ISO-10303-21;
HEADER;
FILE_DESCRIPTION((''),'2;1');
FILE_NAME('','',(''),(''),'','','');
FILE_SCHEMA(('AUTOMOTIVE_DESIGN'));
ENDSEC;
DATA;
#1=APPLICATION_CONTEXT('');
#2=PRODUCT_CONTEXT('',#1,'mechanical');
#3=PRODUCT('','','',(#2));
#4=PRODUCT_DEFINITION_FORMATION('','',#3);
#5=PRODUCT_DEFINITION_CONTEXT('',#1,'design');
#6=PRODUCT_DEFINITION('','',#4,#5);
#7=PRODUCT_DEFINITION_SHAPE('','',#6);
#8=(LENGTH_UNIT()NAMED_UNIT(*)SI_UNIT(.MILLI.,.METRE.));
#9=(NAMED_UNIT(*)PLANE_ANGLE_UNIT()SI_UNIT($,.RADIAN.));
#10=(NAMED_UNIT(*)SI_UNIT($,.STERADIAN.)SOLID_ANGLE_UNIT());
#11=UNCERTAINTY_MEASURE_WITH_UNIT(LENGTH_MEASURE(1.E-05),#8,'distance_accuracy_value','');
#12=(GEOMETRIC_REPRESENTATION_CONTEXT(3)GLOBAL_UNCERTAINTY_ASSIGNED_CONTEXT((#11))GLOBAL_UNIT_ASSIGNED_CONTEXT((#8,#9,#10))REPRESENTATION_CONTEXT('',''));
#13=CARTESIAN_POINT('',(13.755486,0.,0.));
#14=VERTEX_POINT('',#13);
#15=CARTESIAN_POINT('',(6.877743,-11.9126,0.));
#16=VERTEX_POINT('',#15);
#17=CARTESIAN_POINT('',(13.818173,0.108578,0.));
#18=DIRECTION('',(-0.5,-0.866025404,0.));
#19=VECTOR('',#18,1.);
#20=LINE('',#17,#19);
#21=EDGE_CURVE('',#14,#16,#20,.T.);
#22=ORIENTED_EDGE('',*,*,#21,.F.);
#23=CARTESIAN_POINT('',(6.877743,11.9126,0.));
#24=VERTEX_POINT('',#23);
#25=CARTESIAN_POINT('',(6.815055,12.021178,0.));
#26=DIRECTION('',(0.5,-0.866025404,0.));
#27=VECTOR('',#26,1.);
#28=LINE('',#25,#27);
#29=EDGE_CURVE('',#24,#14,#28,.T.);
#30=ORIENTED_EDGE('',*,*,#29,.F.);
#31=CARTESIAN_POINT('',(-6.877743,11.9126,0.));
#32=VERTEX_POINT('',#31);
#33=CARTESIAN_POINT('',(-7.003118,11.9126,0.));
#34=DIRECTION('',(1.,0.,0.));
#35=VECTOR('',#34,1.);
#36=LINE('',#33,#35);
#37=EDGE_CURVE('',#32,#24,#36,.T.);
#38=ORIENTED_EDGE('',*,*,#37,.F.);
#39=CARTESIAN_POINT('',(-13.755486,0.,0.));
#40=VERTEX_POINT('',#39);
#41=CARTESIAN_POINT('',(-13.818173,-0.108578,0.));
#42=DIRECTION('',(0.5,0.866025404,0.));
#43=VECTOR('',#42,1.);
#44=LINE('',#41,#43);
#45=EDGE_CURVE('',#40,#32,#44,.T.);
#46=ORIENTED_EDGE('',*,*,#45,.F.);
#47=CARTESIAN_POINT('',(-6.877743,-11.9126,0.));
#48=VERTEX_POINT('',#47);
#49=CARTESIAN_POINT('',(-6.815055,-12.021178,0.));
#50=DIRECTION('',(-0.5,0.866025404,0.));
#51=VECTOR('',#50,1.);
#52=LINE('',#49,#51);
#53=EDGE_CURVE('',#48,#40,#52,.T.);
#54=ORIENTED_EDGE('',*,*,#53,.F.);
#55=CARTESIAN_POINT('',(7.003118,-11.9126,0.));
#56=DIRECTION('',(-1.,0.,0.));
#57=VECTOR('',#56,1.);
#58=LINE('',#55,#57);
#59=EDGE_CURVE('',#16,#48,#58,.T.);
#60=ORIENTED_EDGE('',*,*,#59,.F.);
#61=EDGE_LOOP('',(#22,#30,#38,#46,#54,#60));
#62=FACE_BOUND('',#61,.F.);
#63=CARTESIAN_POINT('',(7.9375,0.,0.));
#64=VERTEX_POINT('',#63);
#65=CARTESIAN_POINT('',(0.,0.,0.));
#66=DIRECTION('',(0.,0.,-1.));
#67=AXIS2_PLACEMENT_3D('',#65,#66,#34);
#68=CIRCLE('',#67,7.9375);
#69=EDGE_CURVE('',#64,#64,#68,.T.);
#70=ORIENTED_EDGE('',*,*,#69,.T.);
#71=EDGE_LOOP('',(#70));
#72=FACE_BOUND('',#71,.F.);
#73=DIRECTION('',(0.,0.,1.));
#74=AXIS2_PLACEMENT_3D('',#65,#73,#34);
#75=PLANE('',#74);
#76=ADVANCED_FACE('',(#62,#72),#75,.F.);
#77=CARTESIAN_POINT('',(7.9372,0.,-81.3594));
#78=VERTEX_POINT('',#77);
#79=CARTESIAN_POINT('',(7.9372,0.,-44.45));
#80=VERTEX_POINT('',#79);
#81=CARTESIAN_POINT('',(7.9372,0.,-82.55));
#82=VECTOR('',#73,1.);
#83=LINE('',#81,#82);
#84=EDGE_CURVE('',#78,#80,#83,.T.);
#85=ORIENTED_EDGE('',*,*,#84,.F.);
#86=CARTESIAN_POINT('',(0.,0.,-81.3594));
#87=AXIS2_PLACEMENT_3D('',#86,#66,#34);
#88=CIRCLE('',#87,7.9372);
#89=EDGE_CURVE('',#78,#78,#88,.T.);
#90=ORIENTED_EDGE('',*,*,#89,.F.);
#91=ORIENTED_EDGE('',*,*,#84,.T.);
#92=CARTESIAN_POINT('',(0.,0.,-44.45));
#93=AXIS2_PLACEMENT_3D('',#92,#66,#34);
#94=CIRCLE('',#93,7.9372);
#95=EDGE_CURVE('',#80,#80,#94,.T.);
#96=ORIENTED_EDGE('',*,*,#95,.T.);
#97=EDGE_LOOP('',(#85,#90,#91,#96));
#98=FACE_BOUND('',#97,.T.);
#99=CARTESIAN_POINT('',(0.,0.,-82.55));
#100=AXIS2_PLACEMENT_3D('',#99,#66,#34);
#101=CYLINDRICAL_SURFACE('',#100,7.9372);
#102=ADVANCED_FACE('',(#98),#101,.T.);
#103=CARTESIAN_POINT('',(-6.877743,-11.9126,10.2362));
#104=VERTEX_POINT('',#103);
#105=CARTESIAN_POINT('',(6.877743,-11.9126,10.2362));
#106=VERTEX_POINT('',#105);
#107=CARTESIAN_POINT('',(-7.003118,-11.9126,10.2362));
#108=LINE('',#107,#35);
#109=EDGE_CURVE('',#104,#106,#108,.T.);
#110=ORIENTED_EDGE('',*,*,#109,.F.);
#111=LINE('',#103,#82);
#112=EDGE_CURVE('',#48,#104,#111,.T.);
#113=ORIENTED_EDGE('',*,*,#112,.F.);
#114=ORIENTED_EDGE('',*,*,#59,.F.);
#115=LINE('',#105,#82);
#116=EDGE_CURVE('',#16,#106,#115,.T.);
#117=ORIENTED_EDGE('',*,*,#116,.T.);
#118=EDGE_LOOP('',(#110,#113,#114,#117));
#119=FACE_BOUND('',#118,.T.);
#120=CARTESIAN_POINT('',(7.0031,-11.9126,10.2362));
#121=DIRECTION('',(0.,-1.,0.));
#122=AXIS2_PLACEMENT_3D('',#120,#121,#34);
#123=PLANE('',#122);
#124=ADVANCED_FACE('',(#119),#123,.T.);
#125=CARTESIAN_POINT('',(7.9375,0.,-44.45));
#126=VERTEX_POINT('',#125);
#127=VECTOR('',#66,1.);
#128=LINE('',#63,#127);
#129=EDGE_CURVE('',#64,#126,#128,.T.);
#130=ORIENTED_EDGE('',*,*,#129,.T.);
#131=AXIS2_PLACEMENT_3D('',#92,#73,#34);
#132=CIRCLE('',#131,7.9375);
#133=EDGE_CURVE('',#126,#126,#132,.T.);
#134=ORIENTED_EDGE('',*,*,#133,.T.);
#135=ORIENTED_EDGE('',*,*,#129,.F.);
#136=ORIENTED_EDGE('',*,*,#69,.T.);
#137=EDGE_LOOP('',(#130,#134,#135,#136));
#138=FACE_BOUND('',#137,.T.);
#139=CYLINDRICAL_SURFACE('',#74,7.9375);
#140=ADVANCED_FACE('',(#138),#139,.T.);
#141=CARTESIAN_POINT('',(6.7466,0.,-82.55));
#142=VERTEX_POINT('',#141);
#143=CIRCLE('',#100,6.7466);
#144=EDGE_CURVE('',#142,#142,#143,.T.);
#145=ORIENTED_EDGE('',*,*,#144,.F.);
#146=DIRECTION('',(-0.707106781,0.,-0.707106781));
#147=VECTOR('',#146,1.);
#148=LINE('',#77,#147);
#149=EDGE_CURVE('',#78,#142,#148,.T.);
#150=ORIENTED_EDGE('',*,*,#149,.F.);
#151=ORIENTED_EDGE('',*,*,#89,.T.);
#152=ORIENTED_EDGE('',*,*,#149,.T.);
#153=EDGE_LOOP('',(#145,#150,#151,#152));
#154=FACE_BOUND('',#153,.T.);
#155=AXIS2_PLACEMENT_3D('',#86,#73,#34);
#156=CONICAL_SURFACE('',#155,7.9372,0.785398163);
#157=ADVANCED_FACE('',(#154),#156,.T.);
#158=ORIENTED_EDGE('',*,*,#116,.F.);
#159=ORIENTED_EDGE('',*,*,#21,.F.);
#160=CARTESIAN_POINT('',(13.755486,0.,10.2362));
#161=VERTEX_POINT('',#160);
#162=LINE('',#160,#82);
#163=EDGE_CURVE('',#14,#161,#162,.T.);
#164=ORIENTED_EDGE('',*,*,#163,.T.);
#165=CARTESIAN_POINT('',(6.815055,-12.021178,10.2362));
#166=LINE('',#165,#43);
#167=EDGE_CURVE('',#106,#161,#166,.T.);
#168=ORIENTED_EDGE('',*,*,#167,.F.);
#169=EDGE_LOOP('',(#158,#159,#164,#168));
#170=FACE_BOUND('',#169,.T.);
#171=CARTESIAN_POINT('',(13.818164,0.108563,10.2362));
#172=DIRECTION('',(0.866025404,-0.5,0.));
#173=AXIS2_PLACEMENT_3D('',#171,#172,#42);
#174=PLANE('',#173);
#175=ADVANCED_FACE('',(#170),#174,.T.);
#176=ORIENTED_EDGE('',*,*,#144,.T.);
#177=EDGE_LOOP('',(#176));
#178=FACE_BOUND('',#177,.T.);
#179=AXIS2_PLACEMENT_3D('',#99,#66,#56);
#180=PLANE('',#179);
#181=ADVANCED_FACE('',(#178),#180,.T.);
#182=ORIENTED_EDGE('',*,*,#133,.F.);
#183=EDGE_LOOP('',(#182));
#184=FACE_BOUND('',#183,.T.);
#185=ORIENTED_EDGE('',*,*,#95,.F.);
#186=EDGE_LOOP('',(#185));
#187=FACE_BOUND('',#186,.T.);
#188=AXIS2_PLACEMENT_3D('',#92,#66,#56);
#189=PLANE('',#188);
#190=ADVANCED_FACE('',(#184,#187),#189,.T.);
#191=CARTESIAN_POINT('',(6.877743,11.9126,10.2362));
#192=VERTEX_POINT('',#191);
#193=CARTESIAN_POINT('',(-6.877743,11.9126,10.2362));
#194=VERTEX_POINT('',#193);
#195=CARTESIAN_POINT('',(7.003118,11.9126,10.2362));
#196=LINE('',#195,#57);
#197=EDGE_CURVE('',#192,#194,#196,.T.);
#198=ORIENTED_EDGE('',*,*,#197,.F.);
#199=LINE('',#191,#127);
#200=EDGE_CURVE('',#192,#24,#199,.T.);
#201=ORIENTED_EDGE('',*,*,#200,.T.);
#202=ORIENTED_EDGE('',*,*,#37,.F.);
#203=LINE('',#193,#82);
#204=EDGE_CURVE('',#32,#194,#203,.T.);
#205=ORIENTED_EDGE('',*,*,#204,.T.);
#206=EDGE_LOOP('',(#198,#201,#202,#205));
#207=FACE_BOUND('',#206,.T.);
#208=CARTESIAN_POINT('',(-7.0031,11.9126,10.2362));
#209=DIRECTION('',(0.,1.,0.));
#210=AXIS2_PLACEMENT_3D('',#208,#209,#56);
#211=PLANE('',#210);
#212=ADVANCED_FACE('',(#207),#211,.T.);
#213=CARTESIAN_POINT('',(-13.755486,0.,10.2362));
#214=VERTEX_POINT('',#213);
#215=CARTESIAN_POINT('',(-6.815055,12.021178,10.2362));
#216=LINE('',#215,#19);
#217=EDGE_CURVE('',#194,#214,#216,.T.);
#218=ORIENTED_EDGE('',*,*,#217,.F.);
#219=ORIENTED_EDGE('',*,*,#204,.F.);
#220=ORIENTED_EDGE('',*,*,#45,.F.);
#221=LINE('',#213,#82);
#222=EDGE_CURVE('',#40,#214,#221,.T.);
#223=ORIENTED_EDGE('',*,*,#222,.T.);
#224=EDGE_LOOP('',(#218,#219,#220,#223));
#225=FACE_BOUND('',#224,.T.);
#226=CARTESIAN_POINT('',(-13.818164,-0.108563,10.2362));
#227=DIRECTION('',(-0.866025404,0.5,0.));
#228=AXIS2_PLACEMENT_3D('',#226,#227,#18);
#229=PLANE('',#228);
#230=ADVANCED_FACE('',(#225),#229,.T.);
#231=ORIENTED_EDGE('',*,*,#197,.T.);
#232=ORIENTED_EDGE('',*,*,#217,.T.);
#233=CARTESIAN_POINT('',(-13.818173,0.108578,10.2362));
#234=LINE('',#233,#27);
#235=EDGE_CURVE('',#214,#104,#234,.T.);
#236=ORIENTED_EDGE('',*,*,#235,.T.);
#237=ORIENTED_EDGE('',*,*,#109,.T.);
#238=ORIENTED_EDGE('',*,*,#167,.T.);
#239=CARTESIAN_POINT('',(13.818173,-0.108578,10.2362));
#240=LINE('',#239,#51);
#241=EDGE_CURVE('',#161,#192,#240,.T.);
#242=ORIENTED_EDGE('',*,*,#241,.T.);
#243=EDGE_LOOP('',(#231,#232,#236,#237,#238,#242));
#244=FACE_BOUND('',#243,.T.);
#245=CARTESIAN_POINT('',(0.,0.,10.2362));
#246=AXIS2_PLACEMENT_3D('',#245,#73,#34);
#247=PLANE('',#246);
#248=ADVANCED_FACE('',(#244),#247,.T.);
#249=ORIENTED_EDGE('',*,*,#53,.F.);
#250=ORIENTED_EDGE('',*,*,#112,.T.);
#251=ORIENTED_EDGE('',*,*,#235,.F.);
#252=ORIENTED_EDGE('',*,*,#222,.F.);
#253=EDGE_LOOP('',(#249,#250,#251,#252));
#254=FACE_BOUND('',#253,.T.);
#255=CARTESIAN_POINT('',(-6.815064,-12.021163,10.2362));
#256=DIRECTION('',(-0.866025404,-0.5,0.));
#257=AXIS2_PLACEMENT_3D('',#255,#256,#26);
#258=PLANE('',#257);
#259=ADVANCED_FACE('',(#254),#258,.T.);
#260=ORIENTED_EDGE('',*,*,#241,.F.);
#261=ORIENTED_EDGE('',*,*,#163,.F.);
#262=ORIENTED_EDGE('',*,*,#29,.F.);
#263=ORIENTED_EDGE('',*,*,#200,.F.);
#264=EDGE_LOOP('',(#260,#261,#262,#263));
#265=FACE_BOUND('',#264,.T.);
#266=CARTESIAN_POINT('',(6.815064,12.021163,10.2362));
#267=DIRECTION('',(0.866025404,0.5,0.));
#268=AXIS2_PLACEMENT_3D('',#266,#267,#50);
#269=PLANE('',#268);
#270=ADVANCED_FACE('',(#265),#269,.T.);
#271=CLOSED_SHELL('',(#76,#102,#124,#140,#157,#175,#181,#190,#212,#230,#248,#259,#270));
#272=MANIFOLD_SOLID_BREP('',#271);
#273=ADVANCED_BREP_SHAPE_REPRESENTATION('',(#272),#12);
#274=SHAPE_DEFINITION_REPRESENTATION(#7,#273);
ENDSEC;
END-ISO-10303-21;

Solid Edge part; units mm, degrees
sketch "Sketch1" plane through (0, 0, 0) normal (0, 0, 1) x (1, 0, 0)
  circle A0 centre (0, 0) radius 13.8186
  dimension "D1" = 27.6372
extrude "Protrusion1" add sketch "Sketch1" along normal blind 10.2362
sketch "Sketch2" plane through (0, 0, 0) normal (0, 0, -1) x (1, 0, 0)
  circle A0 centre (0, 0) radius 7.9375
extrude "Protrusion2" add sketch "Sketch2" along normal blind 82.55
sketch "Sketch3" plane through (0, 0, -82.55) normal (0, 0, -1) x (1, 0, 0)
  circle A0 centre (0, 0) radius 7.9372
extrude "Cutout1" cut sketch "Sketch3" against normal blind 38.1 flip side to cut
chamfer "Chamfer_1" distance 1.1906 angle 45 1 edges at (-7.9372, 0, -82.55)
sketch "Sketch4" plane through (0, 0, 10.2362) normal (0, 0, 1) x (1, 0, 0)
  line L0 (-7.0031, 11.9126) -> (7.0031, 11.9126)
  dimension "D1" = 23.8252
extrude "Cutout2" cut sketch "Sketch4" against normal up to next material side at (0, 11.9626, 10.2362)
pattern_circular "Pattern1" count 6 over 360 about axis through (0, 0, 10.2362) along (0, 0, 1) of "Cutout2"
properties part number "114077"
